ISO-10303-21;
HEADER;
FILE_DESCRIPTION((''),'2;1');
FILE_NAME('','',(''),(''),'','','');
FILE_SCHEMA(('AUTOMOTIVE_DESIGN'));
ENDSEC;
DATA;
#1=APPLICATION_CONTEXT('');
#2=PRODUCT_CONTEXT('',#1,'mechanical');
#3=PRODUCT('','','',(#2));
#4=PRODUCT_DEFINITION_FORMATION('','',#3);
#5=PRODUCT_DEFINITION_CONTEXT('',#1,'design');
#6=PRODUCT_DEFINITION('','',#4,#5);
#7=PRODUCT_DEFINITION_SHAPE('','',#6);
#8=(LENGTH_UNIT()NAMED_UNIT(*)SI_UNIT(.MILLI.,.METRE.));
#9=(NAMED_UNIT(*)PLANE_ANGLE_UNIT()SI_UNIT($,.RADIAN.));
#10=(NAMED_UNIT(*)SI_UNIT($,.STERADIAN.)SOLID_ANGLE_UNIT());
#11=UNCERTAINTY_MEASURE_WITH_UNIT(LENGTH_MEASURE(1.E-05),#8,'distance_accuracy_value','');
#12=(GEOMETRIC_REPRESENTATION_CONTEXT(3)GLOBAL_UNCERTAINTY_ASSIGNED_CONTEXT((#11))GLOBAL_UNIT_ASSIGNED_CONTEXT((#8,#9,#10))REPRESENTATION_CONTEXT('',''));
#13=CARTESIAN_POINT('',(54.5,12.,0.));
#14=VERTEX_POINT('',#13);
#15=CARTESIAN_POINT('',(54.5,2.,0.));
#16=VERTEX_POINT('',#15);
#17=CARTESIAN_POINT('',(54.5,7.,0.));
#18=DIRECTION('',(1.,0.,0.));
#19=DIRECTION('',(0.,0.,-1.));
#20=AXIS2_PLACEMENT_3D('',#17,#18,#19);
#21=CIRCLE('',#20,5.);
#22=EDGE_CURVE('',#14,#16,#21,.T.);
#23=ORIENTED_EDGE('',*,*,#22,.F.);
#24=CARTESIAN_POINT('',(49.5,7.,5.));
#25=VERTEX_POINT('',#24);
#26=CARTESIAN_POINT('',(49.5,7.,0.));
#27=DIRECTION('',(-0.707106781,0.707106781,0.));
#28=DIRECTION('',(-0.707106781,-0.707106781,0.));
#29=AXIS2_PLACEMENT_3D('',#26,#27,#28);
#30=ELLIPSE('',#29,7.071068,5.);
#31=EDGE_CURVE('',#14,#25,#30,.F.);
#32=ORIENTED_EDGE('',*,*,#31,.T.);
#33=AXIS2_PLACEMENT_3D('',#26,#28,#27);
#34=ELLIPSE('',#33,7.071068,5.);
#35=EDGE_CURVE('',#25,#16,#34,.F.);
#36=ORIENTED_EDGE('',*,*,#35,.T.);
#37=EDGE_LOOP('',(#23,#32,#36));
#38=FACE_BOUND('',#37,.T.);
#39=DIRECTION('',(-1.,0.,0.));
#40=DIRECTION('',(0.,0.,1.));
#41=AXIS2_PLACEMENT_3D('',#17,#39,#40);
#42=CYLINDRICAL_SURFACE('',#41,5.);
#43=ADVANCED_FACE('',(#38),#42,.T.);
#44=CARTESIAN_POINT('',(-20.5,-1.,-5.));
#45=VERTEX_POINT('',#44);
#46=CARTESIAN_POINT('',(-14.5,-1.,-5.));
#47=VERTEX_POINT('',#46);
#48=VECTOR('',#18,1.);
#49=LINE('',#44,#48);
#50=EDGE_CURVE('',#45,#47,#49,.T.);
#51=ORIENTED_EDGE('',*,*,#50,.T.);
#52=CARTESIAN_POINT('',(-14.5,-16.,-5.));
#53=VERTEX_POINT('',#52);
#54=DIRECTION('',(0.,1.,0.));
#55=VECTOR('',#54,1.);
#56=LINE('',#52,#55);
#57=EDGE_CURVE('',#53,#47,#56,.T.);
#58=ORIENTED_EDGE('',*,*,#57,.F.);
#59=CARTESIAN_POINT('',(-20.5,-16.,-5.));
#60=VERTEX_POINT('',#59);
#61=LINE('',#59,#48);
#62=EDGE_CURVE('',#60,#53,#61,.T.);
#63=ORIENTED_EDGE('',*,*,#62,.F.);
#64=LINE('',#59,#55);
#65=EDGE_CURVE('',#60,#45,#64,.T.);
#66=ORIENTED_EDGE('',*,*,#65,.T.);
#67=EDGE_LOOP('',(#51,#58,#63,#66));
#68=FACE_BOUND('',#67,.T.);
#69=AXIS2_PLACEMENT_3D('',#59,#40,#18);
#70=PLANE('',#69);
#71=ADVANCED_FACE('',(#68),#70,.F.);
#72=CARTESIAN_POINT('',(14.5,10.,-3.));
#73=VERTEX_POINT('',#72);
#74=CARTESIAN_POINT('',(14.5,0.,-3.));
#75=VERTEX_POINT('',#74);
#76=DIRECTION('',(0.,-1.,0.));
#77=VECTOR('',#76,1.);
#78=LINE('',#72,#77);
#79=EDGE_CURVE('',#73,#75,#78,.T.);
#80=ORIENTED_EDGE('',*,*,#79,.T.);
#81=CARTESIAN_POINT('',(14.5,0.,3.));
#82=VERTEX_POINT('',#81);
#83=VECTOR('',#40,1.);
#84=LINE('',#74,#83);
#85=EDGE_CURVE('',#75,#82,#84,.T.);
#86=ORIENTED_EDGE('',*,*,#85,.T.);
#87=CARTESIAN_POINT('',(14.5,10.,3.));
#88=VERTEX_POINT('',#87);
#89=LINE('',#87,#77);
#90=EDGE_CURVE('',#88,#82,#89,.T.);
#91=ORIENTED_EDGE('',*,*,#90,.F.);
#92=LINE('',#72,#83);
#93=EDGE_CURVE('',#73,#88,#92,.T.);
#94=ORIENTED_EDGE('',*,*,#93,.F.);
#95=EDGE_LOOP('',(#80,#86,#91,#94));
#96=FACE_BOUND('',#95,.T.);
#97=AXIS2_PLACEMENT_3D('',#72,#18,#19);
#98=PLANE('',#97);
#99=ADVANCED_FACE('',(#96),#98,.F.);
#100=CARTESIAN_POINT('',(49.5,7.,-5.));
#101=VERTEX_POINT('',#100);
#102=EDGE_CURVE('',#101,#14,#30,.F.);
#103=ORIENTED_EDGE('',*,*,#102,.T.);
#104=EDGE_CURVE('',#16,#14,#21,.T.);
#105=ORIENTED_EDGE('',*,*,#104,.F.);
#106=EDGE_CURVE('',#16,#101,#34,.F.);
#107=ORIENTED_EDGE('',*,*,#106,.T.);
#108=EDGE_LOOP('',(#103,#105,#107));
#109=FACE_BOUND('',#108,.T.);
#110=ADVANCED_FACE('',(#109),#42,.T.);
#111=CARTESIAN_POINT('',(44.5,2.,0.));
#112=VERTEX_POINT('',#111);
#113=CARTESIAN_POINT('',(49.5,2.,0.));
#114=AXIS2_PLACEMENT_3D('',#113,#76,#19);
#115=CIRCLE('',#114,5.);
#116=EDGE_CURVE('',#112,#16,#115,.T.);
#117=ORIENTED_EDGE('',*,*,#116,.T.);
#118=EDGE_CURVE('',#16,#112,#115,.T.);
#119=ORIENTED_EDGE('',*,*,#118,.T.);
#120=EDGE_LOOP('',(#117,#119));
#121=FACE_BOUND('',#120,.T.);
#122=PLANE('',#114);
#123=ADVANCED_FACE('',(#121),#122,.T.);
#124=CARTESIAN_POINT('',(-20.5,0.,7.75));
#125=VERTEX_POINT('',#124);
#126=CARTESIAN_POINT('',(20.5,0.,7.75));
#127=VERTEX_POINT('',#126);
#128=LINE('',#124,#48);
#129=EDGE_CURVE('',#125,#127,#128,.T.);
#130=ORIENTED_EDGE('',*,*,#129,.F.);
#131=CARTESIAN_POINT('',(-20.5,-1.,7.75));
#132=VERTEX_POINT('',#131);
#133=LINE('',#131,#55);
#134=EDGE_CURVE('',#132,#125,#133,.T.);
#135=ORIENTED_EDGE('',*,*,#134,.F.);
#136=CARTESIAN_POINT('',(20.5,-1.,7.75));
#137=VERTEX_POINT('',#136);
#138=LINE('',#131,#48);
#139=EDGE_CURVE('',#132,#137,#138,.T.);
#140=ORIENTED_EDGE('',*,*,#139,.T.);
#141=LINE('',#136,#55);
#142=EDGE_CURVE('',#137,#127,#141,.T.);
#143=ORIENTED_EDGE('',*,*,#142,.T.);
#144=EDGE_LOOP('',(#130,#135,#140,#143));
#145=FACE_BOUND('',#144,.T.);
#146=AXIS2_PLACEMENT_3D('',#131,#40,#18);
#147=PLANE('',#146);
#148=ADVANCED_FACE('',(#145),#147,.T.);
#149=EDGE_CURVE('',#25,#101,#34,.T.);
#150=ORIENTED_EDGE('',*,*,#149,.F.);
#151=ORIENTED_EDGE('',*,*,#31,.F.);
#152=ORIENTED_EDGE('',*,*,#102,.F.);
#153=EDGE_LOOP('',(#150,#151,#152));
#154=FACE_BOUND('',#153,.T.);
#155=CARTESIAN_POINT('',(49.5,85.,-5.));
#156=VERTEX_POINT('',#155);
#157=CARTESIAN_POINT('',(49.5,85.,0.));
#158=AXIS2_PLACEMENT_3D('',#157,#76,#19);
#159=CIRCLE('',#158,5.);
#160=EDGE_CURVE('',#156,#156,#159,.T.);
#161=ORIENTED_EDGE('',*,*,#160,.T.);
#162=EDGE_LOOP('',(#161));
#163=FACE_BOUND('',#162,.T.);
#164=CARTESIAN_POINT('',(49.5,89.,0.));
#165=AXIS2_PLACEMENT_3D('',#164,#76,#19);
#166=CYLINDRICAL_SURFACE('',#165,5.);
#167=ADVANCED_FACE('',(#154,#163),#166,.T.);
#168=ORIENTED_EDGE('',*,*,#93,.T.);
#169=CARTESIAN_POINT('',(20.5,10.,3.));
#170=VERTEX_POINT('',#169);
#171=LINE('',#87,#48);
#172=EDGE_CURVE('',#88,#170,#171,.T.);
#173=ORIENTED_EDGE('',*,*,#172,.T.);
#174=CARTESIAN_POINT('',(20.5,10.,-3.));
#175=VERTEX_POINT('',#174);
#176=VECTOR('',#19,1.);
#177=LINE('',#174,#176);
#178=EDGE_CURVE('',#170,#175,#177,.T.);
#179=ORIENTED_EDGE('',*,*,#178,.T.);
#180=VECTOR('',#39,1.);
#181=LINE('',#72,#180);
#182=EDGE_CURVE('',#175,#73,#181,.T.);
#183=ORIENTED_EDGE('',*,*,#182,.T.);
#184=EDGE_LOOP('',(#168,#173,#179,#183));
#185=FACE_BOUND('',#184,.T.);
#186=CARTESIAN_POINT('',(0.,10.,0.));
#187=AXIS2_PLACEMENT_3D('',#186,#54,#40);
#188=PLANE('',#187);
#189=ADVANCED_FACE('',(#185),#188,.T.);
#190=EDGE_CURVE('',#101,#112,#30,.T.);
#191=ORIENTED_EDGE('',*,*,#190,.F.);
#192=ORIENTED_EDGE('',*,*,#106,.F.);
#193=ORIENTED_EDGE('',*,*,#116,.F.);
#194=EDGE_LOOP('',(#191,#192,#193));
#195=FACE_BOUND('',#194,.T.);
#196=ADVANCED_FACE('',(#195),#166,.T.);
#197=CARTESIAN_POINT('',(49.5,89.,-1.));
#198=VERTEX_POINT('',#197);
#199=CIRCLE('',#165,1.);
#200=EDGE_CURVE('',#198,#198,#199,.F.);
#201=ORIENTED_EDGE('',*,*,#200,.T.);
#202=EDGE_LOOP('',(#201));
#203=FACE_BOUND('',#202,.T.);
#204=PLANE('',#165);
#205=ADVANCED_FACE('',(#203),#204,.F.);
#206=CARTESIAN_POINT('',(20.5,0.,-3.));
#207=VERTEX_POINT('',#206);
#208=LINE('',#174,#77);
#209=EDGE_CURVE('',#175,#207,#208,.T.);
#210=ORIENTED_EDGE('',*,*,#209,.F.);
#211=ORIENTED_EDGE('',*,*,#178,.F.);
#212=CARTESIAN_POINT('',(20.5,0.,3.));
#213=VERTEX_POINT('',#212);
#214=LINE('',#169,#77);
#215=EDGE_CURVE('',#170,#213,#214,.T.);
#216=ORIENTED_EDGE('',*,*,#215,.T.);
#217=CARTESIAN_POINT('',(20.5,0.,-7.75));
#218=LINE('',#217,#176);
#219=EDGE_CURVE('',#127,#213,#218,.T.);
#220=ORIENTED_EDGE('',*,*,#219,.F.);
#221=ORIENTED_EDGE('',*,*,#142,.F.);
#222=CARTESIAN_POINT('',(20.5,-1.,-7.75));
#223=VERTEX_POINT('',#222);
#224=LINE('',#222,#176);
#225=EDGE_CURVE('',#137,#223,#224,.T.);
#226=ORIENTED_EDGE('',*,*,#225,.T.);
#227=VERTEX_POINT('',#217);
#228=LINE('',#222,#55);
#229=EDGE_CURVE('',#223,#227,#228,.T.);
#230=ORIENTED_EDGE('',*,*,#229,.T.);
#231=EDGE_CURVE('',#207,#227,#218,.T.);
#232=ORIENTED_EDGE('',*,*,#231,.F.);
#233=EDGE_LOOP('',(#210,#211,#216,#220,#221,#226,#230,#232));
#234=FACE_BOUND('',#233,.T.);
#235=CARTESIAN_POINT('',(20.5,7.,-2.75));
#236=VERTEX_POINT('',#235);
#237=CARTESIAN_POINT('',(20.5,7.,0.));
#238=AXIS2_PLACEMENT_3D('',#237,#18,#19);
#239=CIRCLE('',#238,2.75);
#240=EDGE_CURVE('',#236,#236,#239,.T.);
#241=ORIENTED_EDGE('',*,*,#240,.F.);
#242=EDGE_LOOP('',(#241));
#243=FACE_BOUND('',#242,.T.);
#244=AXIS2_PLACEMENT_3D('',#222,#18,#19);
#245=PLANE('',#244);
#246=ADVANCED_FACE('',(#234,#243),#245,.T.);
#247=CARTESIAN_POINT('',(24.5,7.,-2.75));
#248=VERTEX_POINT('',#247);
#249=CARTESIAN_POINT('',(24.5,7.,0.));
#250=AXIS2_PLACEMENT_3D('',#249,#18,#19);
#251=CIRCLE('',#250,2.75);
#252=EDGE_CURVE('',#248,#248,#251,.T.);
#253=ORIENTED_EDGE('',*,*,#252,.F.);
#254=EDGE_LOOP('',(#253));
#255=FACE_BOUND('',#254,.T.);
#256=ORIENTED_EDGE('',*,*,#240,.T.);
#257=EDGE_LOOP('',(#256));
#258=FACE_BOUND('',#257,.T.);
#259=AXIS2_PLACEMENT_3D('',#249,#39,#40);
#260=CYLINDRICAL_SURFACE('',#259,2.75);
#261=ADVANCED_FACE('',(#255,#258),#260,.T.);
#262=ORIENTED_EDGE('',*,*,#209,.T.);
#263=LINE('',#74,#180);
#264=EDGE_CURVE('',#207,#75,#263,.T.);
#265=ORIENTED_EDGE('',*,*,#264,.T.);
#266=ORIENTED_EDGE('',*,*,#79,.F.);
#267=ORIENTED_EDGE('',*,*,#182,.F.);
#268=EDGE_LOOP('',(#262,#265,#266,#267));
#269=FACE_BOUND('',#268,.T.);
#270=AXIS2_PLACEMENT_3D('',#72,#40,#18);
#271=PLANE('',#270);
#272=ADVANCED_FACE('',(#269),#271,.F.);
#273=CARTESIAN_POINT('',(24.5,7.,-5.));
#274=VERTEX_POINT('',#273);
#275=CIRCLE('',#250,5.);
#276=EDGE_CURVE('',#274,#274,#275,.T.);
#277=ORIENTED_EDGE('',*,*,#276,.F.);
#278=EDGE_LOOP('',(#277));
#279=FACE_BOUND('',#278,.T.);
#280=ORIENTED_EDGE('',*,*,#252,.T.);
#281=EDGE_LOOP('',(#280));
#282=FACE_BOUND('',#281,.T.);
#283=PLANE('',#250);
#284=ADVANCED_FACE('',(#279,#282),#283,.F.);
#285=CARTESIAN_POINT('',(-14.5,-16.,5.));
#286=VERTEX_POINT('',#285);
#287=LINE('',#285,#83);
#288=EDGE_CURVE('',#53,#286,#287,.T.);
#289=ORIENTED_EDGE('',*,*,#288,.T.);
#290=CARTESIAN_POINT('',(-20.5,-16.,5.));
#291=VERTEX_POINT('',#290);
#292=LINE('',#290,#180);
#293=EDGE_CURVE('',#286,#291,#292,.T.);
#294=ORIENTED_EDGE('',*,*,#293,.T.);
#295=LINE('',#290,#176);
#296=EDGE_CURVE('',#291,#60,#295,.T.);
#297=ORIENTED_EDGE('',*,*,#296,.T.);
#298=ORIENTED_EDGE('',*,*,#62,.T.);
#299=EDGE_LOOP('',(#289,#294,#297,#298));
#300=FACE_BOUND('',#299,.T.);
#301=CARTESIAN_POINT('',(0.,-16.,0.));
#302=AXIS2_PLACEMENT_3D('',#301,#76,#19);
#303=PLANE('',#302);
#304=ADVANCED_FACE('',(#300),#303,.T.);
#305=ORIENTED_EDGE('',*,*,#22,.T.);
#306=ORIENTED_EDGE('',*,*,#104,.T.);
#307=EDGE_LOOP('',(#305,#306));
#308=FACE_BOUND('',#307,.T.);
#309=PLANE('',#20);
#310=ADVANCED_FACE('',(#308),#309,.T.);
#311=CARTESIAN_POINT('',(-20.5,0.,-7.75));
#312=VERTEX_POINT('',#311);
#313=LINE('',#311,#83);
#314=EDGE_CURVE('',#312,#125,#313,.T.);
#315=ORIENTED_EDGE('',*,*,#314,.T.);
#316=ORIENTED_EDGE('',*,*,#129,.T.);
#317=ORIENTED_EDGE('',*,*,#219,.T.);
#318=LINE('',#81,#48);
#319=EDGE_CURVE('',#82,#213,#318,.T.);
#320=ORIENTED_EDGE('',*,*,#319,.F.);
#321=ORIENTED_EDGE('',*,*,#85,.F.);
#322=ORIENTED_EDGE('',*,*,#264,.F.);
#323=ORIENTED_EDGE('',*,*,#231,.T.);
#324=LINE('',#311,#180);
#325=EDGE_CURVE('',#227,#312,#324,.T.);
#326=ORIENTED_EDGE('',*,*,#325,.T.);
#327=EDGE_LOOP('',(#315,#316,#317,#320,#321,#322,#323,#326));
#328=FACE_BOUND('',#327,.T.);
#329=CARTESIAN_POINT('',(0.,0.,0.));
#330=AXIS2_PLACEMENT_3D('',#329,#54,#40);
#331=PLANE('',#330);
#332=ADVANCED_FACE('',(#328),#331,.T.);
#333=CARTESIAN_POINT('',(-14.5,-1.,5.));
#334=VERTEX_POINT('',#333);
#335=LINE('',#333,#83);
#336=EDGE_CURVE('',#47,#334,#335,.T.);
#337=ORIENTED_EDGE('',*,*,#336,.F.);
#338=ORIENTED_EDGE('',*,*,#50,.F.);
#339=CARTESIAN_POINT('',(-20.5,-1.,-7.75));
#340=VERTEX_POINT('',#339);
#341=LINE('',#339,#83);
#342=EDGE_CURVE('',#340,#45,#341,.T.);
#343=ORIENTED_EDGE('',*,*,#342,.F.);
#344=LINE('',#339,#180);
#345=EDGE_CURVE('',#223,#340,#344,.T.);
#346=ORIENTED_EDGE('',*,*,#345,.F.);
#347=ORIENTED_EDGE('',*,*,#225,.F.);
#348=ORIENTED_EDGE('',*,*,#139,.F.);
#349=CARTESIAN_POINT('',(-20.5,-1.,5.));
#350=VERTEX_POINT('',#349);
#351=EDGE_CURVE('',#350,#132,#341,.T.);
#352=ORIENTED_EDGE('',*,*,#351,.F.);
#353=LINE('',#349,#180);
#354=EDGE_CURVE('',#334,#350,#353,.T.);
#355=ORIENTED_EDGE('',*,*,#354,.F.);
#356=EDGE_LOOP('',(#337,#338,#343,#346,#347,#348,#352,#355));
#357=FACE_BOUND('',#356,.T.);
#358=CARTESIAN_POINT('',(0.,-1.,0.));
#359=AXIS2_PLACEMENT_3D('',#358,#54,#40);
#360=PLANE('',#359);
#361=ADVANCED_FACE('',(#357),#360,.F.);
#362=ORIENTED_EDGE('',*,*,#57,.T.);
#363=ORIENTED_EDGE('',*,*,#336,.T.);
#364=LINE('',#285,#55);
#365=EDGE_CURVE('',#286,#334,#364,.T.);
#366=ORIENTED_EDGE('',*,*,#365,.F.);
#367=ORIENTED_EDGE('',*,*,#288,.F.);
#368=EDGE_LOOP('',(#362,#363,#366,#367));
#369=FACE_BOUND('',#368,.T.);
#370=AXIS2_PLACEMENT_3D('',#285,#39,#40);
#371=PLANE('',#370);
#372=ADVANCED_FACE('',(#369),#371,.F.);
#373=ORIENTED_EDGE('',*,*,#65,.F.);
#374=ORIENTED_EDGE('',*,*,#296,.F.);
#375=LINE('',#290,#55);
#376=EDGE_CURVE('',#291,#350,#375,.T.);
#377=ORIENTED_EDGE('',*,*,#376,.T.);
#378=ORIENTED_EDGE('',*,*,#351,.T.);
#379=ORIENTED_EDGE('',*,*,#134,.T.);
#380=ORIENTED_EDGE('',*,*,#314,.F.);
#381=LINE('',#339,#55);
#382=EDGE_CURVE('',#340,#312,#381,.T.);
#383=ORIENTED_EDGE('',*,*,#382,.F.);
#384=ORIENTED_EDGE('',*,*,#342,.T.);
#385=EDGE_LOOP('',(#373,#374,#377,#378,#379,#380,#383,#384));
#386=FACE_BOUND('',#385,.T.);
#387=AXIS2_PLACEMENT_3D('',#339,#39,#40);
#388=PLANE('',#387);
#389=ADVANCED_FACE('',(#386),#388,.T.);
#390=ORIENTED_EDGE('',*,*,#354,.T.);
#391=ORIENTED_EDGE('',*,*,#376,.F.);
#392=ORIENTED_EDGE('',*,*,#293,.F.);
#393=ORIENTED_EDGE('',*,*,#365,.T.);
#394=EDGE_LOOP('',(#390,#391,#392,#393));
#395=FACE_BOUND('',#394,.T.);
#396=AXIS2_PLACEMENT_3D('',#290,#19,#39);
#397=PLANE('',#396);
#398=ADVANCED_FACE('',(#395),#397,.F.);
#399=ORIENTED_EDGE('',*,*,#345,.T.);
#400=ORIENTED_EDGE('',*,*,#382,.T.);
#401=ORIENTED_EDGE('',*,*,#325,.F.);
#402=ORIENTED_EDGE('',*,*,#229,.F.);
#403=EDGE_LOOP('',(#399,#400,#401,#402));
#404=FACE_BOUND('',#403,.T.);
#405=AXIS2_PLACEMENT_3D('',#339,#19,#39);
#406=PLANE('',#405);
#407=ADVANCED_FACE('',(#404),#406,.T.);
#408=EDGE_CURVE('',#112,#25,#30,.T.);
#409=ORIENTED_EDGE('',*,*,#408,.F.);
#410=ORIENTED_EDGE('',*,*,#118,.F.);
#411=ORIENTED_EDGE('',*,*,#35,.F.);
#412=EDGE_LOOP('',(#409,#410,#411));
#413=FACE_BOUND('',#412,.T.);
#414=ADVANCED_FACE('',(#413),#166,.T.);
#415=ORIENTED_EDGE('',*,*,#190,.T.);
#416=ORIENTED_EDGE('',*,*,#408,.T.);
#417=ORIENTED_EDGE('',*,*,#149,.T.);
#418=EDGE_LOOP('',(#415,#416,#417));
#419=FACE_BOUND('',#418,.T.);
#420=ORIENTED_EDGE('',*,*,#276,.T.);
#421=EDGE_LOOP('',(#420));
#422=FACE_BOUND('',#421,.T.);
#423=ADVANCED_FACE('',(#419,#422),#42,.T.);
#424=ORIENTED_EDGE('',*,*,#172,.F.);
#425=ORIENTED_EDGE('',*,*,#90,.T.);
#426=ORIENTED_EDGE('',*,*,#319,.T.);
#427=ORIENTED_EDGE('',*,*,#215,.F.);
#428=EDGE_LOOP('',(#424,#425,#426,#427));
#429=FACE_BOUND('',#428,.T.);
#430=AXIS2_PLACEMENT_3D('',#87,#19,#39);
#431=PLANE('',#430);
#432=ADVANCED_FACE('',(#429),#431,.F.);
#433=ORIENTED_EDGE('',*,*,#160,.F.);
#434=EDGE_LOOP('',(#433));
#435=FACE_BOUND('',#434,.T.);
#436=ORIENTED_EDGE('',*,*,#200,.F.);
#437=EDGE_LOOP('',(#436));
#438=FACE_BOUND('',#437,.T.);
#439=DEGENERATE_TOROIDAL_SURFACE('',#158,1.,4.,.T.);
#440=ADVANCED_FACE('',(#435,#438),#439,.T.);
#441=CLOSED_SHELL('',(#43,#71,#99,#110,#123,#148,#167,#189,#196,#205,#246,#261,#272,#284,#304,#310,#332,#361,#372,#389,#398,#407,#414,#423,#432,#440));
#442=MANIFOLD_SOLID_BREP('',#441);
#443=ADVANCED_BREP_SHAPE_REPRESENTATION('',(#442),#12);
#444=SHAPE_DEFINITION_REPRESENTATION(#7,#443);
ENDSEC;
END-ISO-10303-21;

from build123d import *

# Parameters (mm, degrees)
SKETCH_1_W             = 41
SKETCH_1_H             = 15.5
SM_BASE_FLANGE_1_DEPTH = 1
SKETCH_6_W             = 6
SKETCH_6_H             = 6
EXTRUDE_1_DEPTH        = 10
SKETCH_7_R             = 2.75
EXTRUDE_2_DEPTH        = 4
SKETCH_8_R             = 5
EXTRUDE_3_DEPTH        = 30
SKETCH_9_R             = 5
EXTRUDE_4_DEPTH        = 87
FILLET_1_R             = 4
SKETCH_10_W            = 6
SKETCH_10_H            = 10
EXTRUDE_5_DEPTH        = 15


# Sheet-metal steps are written as plain solids
with BuildPart() as part:
    # Sketch 1 → Базовая кромка1 (new body)
    with BuildSketch(Plane(origin=(0, 0, 0), x_dir=(1, 0, 0), z_dir=(0, 1, 0))):
        Rectangle(SKETCH_1_W, SKETCH_1_H)
    extrude(amount=-SM_BASE_FLANGE_1_DEPTH)

    # Эскиз6 → Бобышка-Вытянуть1 (add)
    with BuildSketch(Plane(origin=(0, 0, 0), x_dir=(1, 0, 0), z_dir=(0, 1, 0))):
        with Locations((17.5, 0)):
            Rectangle(SKETCH_6_W, SKETCH_6_H)
    extrude(amount=EXTRUDE_1_DEPTH)

    # Эскиз7 → Бобышка-Вытянуть2 (add)
    with BuildSketch(Plane(origin=(20.5, 0, 0), x_dir=(0, 0, -1), z_dir=(1, 0, 0))):
        with Locations((0, 7)):
            Circle(SKETCH_7_R)
    extrude(amount=EXTRUDE_2_DEPTH)

    # Эскиз8 → Бобышка-Вытянуть3 (add)
    with BuildSketch(Plane(origin=(24.5, 0, 0), x_dir=(0, 0, -1), z_dir=(1, 0, 0))):
        with Locations((0, 7)):
            Circle(SKETCH_8_R)
    extrude(amount=EXTRUDE_3_DEPTH)

    # Эскиз9 → Бобышка-Вытянуть4 (add)
    with BuildSketch(Plane(origin=(0, 2, 0), x_dir=(-1, 0, 0), z_dir=(0, -1, 0))):
        with Locations(Location((-49.5, 0, 0), (0, 0, 90))):
            Circle(SKETCH_9_R)
    extrude(amount=-EXTRUDE_4_DEPTH)

    # Скругление1
    fillet_1_edges = [part.edges().sort_by_distance(p)[0] for p in [
        (49.5, 89, 5),
    ]]
    fillet(fillet_1_edges, radius=FILLET_1_R)

    # Эскиз10 → Бобышка-Вытянуть5 (add)
    with BuildSketch(Plane.XZ.offset(1)):
        with Locations((-17.5, 0)):
            Rectangle(SKETCH_10_W, SKETCH_10_H)
    extrude(amount=EXTRUDE_5_DEPTH)


solid = part.part
